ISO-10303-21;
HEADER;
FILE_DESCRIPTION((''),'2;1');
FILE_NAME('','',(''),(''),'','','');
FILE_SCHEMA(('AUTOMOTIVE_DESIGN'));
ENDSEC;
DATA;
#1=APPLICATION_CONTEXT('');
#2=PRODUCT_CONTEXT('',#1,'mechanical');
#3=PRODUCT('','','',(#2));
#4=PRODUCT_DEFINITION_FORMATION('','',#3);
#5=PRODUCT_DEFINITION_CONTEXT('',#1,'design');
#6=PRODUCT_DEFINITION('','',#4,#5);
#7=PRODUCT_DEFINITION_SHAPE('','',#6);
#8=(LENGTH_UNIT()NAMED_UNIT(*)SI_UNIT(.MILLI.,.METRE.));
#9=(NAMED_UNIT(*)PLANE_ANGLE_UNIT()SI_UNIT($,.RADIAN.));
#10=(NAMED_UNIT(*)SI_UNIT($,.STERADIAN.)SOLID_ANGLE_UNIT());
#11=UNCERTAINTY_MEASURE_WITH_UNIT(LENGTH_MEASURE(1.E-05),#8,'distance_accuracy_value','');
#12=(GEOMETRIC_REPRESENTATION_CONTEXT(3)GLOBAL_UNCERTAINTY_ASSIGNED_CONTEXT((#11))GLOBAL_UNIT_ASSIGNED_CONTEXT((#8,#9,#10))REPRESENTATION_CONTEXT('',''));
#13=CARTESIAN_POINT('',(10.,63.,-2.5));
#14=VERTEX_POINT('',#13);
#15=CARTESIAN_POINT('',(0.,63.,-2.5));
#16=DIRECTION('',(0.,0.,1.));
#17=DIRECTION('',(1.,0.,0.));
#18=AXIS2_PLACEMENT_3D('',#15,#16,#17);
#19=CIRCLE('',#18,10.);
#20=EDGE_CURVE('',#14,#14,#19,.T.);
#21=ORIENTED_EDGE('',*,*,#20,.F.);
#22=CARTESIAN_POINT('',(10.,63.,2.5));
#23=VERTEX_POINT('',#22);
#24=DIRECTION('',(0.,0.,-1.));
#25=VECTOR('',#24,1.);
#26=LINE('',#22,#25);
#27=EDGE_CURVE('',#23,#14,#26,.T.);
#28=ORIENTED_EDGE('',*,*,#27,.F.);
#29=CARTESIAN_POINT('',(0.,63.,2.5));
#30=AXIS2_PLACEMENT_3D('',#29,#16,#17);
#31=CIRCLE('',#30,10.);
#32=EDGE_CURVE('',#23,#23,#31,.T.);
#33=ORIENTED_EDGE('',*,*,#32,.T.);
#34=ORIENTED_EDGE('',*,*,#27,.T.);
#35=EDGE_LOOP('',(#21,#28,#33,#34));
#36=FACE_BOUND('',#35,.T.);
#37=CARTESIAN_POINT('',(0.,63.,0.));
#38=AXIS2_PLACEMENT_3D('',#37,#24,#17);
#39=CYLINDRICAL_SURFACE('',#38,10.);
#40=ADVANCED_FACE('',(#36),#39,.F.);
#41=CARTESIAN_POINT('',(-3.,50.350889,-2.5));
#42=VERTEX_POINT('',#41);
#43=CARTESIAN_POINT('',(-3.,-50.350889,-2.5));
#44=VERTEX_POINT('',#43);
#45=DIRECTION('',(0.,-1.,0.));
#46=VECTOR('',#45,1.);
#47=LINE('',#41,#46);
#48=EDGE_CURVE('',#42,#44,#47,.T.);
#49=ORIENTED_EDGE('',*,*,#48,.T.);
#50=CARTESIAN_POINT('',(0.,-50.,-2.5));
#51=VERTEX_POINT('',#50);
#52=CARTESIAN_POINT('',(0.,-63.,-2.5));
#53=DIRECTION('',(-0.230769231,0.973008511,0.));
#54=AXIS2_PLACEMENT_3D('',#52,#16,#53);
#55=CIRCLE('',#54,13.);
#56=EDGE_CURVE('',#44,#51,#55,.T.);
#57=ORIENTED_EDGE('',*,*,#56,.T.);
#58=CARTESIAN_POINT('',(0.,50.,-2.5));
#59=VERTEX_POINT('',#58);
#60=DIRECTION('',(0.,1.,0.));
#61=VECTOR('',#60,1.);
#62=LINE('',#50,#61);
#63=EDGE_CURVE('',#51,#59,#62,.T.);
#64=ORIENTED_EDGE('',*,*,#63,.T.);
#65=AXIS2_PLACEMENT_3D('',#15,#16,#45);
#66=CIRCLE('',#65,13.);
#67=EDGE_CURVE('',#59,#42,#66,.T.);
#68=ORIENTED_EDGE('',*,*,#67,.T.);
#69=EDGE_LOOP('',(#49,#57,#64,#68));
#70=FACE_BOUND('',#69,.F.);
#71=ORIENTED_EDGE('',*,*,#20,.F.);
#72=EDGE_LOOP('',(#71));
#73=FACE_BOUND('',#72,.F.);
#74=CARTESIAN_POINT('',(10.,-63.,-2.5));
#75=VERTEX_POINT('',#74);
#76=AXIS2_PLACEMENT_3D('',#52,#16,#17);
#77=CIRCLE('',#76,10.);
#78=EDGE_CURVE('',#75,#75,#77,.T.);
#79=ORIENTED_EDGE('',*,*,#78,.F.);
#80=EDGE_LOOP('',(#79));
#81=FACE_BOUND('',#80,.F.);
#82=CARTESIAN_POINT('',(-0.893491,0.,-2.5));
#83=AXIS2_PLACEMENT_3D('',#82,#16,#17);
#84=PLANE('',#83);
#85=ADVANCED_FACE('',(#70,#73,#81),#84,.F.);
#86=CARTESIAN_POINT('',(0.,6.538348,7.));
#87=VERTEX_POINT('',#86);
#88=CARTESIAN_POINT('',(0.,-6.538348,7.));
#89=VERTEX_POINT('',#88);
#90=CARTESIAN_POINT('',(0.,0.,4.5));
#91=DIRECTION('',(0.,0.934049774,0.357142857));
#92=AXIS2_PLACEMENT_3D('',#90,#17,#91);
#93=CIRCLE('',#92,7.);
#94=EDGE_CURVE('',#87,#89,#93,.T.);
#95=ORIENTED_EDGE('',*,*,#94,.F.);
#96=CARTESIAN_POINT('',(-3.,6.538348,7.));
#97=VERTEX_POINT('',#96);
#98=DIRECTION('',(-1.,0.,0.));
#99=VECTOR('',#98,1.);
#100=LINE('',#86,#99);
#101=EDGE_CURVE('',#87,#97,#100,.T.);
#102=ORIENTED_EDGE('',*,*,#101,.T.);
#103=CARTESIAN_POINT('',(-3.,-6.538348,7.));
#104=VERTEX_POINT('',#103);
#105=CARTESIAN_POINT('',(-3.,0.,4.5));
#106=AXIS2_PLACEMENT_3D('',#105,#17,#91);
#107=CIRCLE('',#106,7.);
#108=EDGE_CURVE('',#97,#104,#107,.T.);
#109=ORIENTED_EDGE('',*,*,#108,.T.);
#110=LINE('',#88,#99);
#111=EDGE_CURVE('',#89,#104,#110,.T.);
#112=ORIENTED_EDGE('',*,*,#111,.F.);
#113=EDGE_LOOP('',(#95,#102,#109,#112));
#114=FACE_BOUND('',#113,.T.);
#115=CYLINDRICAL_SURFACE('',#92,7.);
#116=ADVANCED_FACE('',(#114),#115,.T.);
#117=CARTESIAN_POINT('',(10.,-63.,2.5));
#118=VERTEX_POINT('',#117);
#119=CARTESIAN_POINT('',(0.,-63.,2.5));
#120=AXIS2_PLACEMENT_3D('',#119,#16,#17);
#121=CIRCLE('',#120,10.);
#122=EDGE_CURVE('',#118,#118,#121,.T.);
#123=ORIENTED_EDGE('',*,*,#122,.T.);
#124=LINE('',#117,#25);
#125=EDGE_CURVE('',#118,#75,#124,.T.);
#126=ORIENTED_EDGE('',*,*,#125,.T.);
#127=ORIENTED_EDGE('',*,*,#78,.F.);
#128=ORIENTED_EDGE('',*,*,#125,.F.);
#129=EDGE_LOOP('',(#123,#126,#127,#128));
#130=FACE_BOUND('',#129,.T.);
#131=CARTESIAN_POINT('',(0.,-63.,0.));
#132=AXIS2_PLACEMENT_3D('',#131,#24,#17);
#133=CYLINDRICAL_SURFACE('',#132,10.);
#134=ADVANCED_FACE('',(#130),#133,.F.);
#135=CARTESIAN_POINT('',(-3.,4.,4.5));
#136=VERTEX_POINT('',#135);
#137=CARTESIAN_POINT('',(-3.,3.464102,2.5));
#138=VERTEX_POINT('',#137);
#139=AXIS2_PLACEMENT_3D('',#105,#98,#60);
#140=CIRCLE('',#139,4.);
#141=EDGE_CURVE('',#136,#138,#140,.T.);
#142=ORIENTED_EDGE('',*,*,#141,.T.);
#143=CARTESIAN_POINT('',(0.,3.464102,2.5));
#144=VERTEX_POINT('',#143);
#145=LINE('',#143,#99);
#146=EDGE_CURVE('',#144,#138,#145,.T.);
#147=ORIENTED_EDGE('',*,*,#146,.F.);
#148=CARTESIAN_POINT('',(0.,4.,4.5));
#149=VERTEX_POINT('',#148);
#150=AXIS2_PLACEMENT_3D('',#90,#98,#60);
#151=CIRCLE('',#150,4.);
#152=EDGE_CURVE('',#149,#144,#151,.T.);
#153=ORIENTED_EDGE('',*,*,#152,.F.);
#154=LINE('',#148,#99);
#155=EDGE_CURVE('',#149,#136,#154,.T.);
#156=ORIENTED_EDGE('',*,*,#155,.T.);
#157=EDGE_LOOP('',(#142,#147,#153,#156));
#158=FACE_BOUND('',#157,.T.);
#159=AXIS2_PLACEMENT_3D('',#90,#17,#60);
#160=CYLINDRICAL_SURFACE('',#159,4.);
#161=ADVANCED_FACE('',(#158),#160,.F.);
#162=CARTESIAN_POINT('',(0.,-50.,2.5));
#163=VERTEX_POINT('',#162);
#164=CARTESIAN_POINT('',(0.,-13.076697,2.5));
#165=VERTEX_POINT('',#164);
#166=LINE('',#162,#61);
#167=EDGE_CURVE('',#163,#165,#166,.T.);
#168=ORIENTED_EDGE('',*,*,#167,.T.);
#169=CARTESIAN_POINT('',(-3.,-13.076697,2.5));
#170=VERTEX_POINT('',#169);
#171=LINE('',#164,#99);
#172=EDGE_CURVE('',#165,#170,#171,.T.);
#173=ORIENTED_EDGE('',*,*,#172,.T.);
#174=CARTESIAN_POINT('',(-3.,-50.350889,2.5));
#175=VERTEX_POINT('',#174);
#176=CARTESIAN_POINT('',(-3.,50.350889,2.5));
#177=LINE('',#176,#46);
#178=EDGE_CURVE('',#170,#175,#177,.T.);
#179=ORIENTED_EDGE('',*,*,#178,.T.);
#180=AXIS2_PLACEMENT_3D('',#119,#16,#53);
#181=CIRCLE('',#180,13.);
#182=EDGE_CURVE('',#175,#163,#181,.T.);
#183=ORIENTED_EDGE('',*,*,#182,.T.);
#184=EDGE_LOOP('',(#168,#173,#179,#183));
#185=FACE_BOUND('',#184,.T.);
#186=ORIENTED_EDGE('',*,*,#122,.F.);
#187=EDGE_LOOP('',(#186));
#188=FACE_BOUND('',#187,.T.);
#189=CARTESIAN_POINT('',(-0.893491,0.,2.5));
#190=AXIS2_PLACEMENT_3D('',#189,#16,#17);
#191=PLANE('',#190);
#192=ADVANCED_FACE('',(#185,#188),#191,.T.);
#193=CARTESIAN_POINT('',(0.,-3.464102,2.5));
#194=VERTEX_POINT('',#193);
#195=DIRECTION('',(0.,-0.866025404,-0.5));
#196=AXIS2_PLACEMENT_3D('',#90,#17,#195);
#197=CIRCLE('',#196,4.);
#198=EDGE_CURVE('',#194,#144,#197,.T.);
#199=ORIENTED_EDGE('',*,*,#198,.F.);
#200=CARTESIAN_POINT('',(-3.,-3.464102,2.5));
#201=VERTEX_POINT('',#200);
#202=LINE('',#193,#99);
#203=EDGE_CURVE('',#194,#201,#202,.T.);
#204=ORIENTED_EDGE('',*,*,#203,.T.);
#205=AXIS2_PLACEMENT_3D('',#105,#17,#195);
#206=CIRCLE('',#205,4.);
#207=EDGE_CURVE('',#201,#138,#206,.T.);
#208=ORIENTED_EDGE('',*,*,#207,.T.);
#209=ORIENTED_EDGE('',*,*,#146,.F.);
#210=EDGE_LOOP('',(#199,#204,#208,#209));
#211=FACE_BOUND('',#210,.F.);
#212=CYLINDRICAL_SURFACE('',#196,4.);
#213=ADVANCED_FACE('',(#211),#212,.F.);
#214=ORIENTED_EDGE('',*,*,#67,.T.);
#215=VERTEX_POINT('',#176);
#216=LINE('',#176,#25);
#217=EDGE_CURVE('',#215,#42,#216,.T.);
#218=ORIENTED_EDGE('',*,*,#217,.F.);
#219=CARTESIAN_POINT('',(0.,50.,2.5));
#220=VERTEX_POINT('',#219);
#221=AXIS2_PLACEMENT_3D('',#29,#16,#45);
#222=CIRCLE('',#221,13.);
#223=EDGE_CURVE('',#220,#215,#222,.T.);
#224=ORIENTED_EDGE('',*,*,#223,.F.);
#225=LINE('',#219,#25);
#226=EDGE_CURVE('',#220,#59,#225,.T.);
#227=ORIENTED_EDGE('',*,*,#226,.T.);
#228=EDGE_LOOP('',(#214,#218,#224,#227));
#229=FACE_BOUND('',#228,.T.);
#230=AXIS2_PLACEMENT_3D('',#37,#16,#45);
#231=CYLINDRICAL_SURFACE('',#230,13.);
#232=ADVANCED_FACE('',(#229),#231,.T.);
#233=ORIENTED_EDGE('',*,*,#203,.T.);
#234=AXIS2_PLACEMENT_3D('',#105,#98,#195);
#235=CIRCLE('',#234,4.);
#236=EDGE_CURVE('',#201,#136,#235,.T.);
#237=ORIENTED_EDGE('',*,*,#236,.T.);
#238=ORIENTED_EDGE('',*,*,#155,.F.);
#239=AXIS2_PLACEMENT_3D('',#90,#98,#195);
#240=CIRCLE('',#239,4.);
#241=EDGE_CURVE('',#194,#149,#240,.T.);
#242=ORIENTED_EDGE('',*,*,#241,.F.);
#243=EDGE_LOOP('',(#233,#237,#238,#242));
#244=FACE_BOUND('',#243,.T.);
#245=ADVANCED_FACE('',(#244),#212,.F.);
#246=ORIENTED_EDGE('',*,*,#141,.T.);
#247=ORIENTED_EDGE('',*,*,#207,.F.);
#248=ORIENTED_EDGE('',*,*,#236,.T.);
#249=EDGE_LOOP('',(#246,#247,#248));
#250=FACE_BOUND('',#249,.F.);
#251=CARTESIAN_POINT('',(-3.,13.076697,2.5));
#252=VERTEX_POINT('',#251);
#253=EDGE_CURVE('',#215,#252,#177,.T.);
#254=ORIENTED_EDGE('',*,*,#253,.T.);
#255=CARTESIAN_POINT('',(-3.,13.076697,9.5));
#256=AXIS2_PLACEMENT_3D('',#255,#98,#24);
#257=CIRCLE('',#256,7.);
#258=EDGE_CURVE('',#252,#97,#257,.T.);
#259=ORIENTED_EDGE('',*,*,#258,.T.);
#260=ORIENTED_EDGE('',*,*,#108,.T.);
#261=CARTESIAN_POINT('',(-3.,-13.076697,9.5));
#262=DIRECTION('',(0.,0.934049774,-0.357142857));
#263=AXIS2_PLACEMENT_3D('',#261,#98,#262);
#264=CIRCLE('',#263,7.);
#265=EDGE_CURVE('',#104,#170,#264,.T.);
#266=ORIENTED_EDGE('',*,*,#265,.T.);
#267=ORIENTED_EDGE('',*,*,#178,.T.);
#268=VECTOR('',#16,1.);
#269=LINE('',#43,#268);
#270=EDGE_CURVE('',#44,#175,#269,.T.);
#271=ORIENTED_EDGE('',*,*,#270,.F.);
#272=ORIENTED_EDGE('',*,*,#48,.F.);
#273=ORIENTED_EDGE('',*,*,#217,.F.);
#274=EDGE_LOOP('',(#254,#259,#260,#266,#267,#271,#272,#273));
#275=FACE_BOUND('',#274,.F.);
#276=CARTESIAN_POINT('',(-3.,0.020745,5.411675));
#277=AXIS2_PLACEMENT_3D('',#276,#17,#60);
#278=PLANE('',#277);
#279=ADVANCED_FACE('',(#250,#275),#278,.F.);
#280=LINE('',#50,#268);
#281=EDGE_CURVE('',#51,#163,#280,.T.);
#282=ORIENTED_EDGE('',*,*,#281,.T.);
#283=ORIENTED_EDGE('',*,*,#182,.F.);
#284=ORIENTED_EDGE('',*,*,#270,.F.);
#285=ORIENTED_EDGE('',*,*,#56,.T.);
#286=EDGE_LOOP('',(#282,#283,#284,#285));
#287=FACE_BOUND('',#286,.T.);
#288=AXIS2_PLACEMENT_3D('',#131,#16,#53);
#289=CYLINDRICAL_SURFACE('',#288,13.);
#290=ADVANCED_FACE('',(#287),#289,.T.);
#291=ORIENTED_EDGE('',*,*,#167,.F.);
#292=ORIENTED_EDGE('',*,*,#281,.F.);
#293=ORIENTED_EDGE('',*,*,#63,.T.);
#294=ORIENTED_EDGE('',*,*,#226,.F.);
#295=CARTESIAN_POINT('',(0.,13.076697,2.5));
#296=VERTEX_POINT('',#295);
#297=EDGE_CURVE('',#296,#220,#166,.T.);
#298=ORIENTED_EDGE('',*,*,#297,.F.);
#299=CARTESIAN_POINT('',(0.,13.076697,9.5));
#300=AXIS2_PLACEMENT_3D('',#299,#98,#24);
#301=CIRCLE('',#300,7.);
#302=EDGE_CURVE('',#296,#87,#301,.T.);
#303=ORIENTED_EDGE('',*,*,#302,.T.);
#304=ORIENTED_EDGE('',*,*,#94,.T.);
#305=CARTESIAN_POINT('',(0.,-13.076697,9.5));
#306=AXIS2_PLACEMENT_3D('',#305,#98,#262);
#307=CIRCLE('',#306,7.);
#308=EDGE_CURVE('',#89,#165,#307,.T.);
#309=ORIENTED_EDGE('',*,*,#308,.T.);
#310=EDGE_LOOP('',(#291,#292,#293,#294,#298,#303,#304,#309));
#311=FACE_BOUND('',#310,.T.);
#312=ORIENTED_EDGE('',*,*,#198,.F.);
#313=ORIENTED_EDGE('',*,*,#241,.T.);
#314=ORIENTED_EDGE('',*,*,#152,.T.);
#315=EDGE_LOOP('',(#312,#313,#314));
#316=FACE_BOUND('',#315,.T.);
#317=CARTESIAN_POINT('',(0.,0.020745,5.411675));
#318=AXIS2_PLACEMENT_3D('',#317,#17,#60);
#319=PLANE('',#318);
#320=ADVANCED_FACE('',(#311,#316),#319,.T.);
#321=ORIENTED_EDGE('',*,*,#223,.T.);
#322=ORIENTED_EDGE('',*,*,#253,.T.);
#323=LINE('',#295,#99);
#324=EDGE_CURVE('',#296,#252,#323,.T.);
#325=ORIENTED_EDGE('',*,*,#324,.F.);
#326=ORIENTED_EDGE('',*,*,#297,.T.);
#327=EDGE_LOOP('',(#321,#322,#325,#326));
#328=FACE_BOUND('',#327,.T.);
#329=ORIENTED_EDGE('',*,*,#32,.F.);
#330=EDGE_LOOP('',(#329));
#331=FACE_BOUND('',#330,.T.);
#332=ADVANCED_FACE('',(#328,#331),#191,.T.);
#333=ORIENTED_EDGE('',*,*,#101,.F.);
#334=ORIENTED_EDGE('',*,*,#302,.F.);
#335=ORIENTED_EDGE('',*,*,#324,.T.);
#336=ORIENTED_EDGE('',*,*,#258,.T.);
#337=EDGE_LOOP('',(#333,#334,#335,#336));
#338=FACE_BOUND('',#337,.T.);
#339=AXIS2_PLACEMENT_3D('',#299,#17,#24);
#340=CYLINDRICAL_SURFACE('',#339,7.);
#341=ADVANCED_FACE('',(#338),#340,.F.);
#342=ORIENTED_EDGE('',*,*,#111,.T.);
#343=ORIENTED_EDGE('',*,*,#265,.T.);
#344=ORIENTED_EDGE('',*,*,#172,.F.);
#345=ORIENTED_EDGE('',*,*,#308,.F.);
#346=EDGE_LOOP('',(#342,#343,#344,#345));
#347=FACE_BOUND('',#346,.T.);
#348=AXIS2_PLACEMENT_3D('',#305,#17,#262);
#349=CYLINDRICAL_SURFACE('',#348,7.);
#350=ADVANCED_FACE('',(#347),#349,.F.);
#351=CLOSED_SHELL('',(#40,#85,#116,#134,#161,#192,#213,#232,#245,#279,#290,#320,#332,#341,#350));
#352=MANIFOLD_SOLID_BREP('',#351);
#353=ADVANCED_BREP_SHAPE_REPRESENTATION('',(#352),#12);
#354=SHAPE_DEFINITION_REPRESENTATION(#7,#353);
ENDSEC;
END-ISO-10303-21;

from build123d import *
from build123d import SkipClean  # not in build123d's __all__

# Parameters (mm, degrees)
F0_R     = 10
F1_DEPTH = 2.5
F3_DEPTH = 3
F4_DEPTH = 25


# Not quite as in the source:
# - a feature names something its author has since deleted; it is built from what else it names


with BuildPart() as f1:
    # F0 (on Top) → F1 (new body, symmetric)
    with BuildSketch(Plane.XY):
        with BuildLine():
            Line((-3, 50.3508893593), (-3, -50.3508893593))
            ThreePointArc((-3, -50.3508893593), (1.5102254254, -75.9119796764), (0, -50))
            Line((0, -50), (0, 50))
            ThreePointArc((0, 50), (1.5102254254, 75.9119796764), (-3, 50.3508893593))
        make_face()
        with Locations((0, -63)):
            Circle(F0_R, mode=Mode.SUBTRACT)
        with Locations((0, 63)):
            Circle(F0_R, mode=Mode.SUBTRACT)
    extrude(amount=F1_DEPTH, both=True)

    # F2 (on face) → F3 (join, through all)
    with BuildSketch(Plane.YZ):
        with BuildLine():
            ThreePointArc((-3.4641016151, 2.5), (-1.0352761804, 8.3637033052), (4, 4.5))
            ThreePointArc((4, 4.5), (3.8637033052, 3.4647238196), (3.4641016151, 2.5))
            Line((3.4641016151, 2.5), (13.0766968306, 2.5))
            ThreePointArc((13.0766968306, 2.5), (9.108069864, 3.7337187027), (6.5383484153, 7))
            ThreePointArc((6.5383484153, 7), (0, 11.5), (-6.5383484153, 7))
            ThreePointArc((-6.5383484153, 7), (-9.108069864, 3.7337187027), (-13.0766968306, 2.5))
            Line((-13.0766968306, 2.5), (-3.4641016151, 2.5))
        make_face()
        with BuildLine():
            ThreePointArc((3.4641016151, 2.5), (0, 0.5), (-3.4641016151, 2.5))
            Line((-3.4641016151, 2.5), (-13.0766968306, 2.5))
            Line((-13.0766968306, 2.5), (-13.0766968306, -2.5))
            Line((-13.0766968306, -2.5), (13.0766968306, -2.5))
            Line((13.0766968306, -2.5), (13.0766968306, 2.5))
            Line((13.0766968306, 2.5), (3.4641016151, 2.5))
        make_face()
    extrude(amount=-F3_DEPTH)

    # F2 (on face) → F4 (cut)
    with BuildSketch(Plane.YZ):
        with BuildLine():
            Line((3.4641016151, 2.5), (-3.4641016151, 2.5))
            ThreePointArc((-3.4641016151, 2.5), (0, 0.5), (3.4641016151, 2.5))
        make_face()
    with SkipClean():  # cleaning this boolean's faces spoils the solid; the shape is the same uncleaned
        extrude(amount=-F4_DEPTH, mode=Mode.SUBTRACT)


solid = f1.part
